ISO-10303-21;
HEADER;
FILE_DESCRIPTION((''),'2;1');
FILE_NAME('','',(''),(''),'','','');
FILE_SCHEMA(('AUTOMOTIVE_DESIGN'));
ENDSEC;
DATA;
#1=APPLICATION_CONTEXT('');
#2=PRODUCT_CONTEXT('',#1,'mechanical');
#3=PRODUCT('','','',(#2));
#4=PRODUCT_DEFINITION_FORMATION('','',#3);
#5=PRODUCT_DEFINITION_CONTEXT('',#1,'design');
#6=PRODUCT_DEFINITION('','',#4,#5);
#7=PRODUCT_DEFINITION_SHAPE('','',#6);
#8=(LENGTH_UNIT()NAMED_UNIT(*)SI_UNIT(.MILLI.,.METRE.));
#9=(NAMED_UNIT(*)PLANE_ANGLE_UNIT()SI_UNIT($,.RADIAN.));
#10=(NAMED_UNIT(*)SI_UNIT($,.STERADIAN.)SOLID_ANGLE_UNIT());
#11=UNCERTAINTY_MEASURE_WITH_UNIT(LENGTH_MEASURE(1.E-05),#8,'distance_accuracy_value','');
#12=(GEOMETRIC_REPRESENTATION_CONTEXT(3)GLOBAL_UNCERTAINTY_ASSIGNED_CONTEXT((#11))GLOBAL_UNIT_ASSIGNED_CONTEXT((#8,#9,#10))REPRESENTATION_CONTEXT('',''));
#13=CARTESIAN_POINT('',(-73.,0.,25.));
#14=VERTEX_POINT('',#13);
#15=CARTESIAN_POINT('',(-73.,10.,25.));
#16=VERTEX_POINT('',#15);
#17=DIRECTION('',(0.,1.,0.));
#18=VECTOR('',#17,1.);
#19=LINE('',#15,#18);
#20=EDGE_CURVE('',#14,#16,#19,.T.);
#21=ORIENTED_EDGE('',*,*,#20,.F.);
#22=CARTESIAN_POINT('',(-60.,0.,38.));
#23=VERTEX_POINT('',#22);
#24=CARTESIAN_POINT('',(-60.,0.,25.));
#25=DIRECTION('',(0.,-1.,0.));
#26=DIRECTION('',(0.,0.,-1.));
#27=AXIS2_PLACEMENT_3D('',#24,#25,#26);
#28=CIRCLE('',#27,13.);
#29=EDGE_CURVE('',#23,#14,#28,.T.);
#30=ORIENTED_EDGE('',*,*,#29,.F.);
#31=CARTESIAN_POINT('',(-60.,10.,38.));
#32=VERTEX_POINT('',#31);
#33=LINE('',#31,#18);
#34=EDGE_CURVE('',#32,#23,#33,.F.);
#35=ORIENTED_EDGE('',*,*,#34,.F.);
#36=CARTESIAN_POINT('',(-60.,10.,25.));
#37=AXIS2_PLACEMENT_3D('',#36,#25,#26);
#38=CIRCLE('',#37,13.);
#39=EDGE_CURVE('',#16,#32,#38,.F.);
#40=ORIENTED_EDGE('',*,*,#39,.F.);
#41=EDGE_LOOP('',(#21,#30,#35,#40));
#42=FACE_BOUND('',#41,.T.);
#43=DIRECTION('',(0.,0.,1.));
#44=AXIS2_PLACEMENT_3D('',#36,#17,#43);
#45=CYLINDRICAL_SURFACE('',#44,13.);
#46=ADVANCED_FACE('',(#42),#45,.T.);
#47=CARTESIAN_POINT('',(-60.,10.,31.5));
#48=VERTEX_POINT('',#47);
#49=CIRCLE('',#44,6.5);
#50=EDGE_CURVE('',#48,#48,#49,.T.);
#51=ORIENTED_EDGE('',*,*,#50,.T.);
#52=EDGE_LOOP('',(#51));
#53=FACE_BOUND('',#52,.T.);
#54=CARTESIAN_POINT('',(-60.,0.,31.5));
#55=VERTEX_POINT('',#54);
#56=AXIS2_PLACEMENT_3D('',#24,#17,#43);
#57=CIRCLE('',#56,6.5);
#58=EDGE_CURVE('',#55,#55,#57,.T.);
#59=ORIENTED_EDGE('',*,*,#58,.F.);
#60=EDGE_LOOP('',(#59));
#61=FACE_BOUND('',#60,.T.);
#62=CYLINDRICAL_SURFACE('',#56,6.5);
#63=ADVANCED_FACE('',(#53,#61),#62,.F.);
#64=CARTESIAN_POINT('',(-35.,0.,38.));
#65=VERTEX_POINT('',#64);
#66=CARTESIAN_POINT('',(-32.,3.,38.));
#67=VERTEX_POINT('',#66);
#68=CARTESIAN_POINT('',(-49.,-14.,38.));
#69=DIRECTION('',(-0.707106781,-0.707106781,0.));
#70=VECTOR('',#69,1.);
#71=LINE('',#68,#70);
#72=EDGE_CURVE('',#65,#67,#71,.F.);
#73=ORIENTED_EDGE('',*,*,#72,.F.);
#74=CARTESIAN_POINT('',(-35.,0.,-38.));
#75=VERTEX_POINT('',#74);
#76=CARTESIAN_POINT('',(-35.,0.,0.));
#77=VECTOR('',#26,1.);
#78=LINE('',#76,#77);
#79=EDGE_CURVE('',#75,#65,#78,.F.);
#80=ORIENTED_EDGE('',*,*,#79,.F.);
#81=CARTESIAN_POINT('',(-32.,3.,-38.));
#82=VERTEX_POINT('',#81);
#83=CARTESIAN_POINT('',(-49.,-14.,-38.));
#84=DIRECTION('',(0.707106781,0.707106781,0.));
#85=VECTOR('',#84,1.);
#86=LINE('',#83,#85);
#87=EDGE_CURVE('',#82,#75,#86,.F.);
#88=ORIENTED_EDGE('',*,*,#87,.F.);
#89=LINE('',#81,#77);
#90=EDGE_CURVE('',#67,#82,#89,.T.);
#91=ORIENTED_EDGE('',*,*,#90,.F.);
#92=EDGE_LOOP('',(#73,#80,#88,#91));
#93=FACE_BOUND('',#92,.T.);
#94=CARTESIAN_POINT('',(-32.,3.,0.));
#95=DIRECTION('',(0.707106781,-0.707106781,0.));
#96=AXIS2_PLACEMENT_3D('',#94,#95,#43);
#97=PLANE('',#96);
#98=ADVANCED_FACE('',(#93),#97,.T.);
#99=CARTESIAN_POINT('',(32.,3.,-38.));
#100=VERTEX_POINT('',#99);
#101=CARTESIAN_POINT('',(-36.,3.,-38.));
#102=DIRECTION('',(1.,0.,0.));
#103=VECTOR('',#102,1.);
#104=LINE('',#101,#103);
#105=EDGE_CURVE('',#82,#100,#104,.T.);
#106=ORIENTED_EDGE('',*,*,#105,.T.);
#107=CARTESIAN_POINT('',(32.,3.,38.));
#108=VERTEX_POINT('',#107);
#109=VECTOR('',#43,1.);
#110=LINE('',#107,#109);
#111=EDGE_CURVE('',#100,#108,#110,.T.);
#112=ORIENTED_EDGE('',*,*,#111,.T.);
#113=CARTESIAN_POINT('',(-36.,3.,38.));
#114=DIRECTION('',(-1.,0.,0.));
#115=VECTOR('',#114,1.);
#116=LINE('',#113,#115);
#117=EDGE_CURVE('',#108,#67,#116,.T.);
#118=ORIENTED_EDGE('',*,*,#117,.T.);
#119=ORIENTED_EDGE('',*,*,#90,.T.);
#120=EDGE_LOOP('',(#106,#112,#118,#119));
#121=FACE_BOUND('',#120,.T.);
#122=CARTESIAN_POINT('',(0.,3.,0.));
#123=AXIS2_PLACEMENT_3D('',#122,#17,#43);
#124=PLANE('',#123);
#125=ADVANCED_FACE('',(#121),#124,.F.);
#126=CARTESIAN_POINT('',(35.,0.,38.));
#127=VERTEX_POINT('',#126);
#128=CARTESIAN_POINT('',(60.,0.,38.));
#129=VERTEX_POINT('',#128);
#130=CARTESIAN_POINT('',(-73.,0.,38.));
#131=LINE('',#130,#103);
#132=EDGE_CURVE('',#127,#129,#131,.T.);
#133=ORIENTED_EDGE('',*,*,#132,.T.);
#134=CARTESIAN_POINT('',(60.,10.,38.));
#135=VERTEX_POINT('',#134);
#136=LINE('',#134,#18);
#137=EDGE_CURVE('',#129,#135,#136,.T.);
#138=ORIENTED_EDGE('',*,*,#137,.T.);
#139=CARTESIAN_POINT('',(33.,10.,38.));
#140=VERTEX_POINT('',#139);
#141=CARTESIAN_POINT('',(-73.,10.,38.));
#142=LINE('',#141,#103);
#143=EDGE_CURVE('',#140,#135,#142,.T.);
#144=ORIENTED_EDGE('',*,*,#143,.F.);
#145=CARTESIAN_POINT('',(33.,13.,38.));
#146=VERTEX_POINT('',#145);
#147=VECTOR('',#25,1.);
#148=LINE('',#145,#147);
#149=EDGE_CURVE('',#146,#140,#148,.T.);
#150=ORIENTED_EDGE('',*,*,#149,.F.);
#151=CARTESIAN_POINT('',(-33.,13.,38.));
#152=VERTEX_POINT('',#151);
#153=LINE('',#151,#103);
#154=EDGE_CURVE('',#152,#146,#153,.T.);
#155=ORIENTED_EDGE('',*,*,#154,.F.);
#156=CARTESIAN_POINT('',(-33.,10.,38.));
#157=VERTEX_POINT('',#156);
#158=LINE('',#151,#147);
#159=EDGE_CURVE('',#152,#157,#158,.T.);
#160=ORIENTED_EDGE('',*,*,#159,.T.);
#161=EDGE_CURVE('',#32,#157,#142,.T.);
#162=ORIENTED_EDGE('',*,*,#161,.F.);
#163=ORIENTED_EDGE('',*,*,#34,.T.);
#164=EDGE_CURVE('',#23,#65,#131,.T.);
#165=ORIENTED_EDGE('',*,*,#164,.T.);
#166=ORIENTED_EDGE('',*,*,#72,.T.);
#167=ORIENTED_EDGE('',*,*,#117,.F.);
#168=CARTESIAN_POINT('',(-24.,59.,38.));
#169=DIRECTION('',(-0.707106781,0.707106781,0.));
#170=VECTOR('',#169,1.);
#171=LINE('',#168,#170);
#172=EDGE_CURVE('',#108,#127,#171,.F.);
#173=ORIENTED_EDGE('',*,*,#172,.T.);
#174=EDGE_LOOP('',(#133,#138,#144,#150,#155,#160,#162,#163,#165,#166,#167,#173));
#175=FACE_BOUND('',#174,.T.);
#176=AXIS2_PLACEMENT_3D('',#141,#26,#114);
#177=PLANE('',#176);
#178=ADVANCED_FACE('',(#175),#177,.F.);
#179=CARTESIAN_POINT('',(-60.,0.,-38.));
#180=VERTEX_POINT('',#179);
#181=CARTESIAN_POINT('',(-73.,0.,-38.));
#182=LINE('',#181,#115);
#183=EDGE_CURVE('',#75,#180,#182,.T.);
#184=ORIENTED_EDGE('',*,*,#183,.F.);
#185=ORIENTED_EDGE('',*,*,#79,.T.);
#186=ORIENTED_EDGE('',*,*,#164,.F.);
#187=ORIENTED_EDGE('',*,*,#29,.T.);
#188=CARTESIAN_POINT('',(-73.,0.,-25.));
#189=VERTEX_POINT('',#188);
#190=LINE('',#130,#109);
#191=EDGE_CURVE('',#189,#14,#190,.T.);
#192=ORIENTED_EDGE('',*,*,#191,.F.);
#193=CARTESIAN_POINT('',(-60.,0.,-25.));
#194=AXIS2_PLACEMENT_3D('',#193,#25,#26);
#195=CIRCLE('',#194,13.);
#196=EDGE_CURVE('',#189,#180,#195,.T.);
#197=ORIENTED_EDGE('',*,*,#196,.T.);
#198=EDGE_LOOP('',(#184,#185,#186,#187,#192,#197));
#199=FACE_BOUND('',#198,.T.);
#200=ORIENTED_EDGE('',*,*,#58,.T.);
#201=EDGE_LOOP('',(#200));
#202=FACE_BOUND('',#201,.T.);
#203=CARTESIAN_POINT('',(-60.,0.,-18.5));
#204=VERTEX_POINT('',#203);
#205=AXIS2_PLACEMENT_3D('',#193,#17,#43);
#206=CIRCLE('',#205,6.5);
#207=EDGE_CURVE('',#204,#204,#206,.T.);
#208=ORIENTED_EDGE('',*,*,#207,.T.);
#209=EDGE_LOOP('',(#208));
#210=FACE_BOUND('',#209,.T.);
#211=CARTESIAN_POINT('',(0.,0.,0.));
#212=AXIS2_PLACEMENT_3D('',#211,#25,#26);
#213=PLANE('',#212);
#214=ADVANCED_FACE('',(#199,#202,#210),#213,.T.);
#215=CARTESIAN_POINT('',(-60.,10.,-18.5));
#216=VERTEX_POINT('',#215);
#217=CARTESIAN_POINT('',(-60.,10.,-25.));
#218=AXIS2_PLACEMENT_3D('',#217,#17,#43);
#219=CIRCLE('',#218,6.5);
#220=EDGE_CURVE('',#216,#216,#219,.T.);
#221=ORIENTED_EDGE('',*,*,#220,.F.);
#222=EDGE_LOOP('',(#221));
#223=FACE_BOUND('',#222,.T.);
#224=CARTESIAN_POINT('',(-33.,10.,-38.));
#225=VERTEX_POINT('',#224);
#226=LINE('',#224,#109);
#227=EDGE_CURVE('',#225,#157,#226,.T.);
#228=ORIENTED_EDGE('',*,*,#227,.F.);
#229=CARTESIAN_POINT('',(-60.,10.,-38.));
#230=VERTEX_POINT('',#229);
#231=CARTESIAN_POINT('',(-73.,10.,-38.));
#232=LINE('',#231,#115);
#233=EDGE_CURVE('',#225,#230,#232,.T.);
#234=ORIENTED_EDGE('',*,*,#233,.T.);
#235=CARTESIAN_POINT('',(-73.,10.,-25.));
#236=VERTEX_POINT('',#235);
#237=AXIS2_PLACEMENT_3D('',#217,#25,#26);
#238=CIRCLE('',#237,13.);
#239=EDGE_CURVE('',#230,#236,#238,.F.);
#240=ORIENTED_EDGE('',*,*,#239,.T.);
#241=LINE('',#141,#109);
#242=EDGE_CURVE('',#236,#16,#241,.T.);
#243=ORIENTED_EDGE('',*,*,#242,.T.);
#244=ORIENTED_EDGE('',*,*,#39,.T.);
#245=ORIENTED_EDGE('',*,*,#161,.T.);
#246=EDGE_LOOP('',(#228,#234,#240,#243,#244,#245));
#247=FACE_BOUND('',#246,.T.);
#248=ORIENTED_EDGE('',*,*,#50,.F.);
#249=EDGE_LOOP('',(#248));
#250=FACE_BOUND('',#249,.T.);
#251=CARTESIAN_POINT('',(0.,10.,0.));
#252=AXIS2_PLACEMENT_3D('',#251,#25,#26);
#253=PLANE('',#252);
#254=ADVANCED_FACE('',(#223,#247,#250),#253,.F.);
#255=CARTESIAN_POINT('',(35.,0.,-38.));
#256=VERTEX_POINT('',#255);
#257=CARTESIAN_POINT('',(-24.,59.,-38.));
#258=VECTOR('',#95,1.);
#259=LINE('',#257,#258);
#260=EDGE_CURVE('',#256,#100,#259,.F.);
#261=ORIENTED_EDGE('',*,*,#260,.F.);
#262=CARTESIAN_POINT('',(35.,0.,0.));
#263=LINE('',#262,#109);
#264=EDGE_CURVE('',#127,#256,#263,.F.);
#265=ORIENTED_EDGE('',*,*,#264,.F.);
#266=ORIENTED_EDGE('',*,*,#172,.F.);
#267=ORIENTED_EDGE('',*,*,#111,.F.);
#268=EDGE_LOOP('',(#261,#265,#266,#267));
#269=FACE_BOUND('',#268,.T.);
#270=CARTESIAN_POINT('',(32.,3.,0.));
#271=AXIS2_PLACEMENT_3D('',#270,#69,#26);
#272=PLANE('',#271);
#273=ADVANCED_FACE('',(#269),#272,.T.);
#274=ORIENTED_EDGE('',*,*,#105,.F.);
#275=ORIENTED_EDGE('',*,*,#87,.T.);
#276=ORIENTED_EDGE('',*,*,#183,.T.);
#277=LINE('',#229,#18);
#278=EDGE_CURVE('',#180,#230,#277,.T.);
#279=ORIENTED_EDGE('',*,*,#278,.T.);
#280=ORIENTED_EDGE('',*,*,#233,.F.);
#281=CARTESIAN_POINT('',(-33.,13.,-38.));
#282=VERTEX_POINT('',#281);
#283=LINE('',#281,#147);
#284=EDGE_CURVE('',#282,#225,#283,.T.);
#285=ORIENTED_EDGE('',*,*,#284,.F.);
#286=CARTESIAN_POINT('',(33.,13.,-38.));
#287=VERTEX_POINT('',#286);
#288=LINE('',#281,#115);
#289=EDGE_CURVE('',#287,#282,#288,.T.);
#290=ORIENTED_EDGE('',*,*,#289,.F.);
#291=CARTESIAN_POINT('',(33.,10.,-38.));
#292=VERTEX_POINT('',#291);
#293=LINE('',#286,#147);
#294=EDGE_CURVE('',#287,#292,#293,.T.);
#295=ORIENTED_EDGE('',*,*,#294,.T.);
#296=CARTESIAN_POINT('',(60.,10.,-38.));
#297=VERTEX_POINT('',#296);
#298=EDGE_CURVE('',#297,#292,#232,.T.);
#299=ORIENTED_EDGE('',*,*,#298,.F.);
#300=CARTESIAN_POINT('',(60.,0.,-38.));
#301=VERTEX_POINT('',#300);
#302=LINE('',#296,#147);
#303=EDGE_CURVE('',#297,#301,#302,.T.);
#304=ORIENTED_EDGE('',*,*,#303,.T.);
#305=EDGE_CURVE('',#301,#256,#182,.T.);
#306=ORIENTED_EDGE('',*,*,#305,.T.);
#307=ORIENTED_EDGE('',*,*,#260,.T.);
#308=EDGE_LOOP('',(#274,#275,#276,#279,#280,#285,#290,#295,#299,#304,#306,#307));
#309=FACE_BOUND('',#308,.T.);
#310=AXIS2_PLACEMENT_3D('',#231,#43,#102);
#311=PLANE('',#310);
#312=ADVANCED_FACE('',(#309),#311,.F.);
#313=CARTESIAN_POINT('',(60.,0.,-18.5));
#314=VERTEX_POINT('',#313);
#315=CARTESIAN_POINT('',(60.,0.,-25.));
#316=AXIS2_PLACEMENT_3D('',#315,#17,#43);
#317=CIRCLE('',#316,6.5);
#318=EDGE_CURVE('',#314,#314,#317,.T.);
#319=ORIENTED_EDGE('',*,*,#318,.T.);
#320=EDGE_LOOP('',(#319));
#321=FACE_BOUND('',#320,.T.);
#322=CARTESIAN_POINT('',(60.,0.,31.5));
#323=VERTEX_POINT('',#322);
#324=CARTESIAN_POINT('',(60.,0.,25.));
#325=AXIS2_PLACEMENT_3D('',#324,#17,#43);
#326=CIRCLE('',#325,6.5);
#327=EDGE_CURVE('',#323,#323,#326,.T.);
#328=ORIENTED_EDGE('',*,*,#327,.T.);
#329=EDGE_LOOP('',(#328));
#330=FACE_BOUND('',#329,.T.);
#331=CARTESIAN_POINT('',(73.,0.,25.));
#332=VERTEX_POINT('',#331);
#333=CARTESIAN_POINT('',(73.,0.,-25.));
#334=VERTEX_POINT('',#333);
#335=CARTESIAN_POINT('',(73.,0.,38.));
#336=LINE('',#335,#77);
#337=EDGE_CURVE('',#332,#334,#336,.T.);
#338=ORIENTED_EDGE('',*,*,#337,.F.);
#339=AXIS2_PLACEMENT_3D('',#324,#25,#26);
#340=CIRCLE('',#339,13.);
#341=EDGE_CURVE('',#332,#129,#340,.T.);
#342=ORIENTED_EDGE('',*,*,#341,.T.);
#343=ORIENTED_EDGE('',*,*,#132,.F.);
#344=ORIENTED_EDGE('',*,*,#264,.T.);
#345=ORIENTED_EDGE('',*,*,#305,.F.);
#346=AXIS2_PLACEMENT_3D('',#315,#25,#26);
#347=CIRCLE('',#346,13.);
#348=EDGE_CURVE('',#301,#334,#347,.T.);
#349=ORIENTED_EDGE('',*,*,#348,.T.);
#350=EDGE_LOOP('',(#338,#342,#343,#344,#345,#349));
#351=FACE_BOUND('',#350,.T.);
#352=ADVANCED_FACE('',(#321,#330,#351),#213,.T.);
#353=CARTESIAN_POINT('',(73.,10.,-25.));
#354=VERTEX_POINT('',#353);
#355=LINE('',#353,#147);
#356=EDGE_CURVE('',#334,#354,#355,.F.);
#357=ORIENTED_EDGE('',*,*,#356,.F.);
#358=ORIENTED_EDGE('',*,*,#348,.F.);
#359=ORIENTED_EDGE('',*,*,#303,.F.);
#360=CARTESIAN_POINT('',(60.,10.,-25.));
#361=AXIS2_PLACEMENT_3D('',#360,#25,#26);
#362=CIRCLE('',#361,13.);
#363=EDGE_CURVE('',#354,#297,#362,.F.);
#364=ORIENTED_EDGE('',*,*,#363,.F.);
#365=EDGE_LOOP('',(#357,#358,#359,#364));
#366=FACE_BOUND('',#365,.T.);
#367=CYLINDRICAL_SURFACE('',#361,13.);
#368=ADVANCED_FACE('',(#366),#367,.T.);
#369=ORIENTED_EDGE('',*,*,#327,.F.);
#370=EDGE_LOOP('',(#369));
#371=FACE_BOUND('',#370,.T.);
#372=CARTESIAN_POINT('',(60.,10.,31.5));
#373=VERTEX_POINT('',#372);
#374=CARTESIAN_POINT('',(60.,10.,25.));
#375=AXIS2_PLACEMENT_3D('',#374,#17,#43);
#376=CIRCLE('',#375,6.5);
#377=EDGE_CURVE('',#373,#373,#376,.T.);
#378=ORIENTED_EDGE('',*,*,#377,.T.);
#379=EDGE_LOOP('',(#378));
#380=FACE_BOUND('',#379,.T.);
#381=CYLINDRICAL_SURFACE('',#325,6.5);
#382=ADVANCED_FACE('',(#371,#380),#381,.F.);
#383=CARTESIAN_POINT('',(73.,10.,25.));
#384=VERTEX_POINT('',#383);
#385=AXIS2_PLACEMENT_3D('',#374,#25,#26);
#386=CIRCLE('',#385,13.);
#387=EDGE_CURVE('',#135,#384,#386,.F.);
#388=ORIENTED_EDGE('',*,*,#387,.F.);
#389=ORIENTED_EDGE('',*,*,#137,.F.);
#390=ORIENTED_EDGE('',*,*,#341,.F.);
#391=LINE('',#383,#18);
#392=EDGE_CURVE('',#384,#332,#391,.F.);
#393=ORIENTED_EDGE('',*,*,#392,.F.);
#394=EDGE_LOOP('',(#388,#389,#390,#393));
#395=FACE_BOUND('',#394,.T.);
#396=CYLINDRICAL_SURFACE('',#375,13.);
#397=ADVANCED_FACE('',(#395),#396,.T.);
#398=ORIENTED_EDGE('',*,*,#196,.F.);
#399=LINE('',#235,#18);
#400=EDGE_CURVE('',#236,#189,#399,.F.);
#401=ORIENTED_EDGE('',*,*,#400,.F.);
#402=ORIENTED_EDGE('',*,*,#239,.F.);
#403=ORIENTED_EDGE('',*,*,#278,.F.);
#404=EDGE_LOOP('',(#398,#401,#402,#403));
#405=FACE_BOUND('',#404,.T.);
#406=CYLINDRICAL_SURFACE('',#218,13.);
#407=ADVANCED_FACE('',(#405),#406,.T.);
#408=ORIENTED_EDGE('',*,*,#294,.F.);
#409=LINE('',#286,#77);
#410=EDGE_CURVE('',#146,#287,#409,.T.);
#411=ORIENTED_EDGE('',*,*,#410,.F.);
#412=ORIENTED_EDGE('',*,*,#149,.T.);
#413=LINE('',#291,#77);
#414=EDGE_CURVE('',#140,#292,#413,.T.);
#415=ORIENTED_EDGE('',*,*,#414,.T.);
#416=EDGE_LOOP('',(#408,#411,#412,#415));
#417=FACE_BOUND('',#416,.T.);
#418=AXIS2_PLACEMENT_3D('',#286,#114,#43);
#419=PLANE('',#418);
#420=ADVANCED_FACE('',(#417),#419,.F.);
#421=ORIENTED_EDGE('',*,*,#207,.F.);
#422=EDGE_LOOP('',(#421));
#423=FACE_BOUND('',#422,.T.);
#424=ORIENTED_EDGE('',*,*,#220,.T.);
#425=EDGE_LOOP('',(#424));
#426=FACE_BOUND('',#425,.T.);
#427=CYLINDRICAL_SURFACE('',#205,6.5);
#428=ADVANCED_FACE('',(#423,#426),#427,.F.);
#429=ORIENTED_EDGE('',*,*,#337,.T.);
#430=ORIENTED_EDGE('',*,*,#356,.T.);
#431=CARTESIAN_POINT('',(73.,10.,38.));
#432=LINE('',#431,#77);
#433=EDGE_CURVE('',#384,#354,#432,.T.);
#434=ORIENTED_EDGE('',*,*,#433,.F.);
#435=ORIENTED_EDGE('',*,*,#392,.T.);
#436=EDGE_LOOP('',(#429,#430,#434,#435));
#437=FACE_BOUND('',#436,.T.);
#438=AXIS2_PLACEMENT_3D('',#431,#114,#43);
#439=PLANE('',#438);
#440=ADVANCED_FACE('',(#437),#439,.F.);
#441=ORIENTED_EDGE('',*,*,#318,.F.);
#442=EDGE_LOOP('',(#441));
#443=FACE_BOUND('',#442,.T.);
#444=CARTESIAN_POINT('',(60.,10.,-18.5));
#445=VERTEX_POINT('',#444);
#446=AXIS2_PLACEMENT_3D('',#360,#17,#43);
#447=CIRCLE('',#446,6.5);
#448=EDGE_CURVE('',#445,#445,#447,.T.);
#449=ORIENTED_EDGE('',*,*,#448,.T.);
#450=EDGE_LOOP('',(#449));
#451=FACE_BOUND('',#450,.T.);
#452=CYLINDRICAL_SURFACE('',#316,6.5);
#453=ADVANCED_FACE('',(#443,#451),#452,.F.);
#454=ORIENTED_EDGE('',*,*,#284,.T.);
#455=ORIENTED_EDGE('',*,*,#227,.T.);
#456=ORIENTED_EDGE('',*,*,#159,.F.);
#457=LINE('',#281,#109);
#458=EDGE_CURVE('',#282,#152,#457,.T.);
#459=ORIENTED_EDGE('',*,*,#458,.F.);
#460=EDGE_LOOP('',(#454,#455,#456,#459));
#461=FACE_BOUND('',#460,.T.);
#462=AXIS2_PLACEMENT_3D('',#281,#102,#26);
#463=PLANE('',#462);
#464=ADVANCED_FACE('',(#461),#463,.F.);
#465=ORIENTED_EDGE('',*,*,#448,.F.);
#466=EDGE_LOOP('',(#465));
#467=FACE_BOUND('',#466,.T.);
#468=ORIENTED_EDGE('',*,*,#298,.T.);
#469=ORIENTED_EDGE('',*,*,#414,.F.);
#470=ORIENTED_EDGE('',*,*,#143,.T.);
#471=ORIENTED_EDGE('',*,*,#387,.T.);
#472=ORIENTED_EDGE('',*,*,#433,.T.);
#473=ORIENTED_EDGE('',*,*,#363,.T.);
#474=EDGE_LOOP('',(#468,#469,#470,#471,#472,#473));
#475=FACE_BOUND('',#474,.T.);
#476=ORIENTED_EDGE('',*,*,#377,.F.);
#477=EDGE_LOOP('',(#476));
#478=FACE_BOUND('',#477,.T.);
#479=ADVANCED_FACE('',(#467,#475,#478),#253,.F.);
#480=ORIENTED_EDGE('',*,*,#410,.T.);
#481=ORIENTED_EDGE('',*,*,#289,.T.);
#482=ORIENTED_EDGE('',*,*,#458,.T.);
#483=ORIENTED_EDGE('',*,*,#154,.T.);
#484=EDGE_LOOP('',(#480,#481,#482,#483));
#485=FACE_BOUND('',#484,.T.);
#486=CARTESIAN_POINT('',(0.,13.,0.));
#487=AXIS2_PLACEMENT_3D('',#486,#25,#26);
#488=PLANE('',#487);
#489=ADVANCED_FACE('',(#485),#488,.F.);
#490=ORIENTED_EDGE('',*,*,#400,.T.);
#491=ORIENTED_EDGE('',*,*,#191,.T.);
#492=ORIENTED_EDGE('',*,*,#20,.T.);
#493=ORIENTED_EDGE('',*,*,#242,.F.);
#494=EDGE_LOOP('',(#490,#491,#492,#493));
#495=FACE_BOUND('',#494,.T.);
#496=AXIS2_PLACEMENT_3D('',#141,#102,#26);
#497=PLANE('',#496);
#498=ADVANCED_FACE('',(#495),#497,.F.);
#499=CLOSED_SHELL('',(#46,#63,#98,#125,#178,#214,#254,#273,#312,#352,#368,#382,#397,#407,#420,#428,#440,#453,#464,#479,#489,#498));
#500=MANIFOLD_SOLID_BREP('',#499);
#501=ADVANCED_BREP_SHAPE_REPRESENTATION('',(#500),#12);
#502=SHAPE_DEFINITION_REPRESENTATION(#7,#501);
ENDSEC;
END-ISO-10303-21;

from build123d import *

# Parameters (mm, degrees)
CROQUIS2_W              = 146
CROQUIS2_H              = 76
SALIENTE_EXTRUIR2_DEPTH = 10
CROQUIS3_W              = 66
CROQUIS3_H              = 76
SALIENTE_EXTRUIR3_DEPTH = 3
REDONDEO1_R             = 13
REDONDEO2_R             = 13
REDONDEO3_R             = 13
REDONDEO4_R             = 13
CROQUIS5_R              = 6.5
CORTAR_EXTRUIR1_DEPTH   = 83.903558428
CROQUIS6_W              = 72
CROQUIS6_H              = 76
CORTAR_EXTRUIR2_DEPTH   = 3
CHAFL_N1_SIZE           = 4
CHAFL_N2_SIZE           = 4


with BuildPart() as part:
    # Croquis2 → Saliente-Extruir2 (new body)
    with BuildSketch(Plane(origin=(0, 0, 0), x_dir=(1, 0, 0), z_dir=(0, 1, 0))):
        Rectangle(CROQUIS2_W, CROQUIS2_H)
    extrude(amount=SALIENTE_EXTRUIR2_DEPTH)

    # Croquis3 → Saliente-Extruir3 (add)
    with BuildSketch(Plane(origin=(0, 10, 0), x_dir=(1, 0, 0), z_dir=(0, 1, 0))):
        Rectangle(CROQUIS3_W, CROQUIS3_H)
    extrude(amount=SALIENTE_EXTRUIR3_DEPTH)

    # Redondeo1
    redondeo1_edges = [part.edges().sort_by_distance(p)[0] for p in [
        (-73, 5, -38),
    ]]
    fillet(redondeo1_edges, radius=REDONDEO1_R)

    # Redondeo2
    redondeo2_edges = [part.edges().sort_by_distance(p)[0] for p in [
        (-73, 5, 38),
    ]]
    fillet(redondeo2_edges, radius=REDONDEO2_R)

    # Redondeo3
    redondeo3_edges = [part.edges().sort_by_distance(p)[0] for p in [
        (73, 5, 38),
    ]]
    fillet(redondeo3_edges, radius=REDONDEO3_R)

    # Redondeo4
    redondeo4_edges = [part.edges().sort_by_distance(p)[0] for p in [
        (73, 5, -38),
    ]]
    fillet(redondeo4_edges, radius=REDONDEO4_R)

    # Croquis5 → Cortar-Extruir1 (cut, through all)
    with BuildSketch(Plane(origin=(0, 10, 0), x_dir=(1, 0, 0), z_dir=(0, 1, 0))):
        with Locations(Location((-60, 25, 0), (0, 0, 270))):
            Circle(CROQUIS5_R)
        with Locations(Location((-60, -25, 0), (0, 0, 270))):
            Circle(CROQUIS5_R)
        with Locations(Location((60, -25, 0), (0, 0, 270))):
            Circle(CROQUIS5_R)
        with Locations(Location((60, 25, 0), (0, 0, 270))):
            Circle(CROQUIS5_R)
    extrude(amount=-CORTAR_EXTRUIR1_DEPTH, mode=Mode.SUBTRACT)

    # Croquis6 → Cortar-Extruir2 (cut)
    with BuildSketch(Plane.XZ):
        Rectangle(CROQUIS6_W, CROQUIS6_H)
    extrude(amount=-CORTAR_EXTRUIR2_DEPTH, mode=Mode.SUBTRACT)

    # Chaflán1
    # the kernel refuses this chamfer: 4 mm, written as the material it adds along each edge
    with BuildSketch(Plane(origin=(-36, 3, 38), x_dir=(-0.027495876610585623, -0.9996219169112968, 0), z_dir=(0, 0, -1))) as chafl_n1_piece_1_section:
        Polygon((CHAFL_N1_SIZE * 0.999621916911, -CHAFL_N1_SIZE * 0.0274958766106), (-CHAFL_N1_SIZE * 0.0274958766106, -CHAFL_N1_SIZE * 0.999621916911), (0, 0), align=None)
    chafl_n1_piece_1 = extrude(amount=76, mode=Mode.PRIVATE)
    chafl_n1_piece_1 = split(chafl_n1_piece_1, bisect_by=Plane(origin=(-34.592163559, 0, 0), z_dir=(0, 1, 0)), keep=Keep.TOP, mode=Mode.PRIVATE)
    add(chafl_n1_piece_1)

    # Chaflán2
    # the kernel refuses this chamfer: 4 mm, written as the material it adds along each edge
    with BuildSketch(Plane(origin=(36, 3, -38), x_dir=(0.027495876610585623, -0.9996219169112968, 0), z_dir=(0, 0, 1))) as chafl_n2_piece_1_section:
        Polygon((CHAFL_N2_SIZE * 0.999621916911, -CHAFL_N2_SIZE * 0.0274958766106), (-CHAFL_N2_SIZE * 0.0274958766106, -CHAFL_N2_SIZE * 0.999621916911), (0, 0), align=None)
    chafl_n2_piece_1 = extrude(amount=76, mode=Mode.PRIVATE)
    chafl_n2_piece_1 = split(chafl_n2_piece_1, bisect_by=Plane(origin=(34.592163559, 0, 0), z_dir=(0, 1, 0)), keep=Keep.TOP, mode=Mode.PRIVATE)
    add(chafl_n2_piece_1)


solid = part.part
